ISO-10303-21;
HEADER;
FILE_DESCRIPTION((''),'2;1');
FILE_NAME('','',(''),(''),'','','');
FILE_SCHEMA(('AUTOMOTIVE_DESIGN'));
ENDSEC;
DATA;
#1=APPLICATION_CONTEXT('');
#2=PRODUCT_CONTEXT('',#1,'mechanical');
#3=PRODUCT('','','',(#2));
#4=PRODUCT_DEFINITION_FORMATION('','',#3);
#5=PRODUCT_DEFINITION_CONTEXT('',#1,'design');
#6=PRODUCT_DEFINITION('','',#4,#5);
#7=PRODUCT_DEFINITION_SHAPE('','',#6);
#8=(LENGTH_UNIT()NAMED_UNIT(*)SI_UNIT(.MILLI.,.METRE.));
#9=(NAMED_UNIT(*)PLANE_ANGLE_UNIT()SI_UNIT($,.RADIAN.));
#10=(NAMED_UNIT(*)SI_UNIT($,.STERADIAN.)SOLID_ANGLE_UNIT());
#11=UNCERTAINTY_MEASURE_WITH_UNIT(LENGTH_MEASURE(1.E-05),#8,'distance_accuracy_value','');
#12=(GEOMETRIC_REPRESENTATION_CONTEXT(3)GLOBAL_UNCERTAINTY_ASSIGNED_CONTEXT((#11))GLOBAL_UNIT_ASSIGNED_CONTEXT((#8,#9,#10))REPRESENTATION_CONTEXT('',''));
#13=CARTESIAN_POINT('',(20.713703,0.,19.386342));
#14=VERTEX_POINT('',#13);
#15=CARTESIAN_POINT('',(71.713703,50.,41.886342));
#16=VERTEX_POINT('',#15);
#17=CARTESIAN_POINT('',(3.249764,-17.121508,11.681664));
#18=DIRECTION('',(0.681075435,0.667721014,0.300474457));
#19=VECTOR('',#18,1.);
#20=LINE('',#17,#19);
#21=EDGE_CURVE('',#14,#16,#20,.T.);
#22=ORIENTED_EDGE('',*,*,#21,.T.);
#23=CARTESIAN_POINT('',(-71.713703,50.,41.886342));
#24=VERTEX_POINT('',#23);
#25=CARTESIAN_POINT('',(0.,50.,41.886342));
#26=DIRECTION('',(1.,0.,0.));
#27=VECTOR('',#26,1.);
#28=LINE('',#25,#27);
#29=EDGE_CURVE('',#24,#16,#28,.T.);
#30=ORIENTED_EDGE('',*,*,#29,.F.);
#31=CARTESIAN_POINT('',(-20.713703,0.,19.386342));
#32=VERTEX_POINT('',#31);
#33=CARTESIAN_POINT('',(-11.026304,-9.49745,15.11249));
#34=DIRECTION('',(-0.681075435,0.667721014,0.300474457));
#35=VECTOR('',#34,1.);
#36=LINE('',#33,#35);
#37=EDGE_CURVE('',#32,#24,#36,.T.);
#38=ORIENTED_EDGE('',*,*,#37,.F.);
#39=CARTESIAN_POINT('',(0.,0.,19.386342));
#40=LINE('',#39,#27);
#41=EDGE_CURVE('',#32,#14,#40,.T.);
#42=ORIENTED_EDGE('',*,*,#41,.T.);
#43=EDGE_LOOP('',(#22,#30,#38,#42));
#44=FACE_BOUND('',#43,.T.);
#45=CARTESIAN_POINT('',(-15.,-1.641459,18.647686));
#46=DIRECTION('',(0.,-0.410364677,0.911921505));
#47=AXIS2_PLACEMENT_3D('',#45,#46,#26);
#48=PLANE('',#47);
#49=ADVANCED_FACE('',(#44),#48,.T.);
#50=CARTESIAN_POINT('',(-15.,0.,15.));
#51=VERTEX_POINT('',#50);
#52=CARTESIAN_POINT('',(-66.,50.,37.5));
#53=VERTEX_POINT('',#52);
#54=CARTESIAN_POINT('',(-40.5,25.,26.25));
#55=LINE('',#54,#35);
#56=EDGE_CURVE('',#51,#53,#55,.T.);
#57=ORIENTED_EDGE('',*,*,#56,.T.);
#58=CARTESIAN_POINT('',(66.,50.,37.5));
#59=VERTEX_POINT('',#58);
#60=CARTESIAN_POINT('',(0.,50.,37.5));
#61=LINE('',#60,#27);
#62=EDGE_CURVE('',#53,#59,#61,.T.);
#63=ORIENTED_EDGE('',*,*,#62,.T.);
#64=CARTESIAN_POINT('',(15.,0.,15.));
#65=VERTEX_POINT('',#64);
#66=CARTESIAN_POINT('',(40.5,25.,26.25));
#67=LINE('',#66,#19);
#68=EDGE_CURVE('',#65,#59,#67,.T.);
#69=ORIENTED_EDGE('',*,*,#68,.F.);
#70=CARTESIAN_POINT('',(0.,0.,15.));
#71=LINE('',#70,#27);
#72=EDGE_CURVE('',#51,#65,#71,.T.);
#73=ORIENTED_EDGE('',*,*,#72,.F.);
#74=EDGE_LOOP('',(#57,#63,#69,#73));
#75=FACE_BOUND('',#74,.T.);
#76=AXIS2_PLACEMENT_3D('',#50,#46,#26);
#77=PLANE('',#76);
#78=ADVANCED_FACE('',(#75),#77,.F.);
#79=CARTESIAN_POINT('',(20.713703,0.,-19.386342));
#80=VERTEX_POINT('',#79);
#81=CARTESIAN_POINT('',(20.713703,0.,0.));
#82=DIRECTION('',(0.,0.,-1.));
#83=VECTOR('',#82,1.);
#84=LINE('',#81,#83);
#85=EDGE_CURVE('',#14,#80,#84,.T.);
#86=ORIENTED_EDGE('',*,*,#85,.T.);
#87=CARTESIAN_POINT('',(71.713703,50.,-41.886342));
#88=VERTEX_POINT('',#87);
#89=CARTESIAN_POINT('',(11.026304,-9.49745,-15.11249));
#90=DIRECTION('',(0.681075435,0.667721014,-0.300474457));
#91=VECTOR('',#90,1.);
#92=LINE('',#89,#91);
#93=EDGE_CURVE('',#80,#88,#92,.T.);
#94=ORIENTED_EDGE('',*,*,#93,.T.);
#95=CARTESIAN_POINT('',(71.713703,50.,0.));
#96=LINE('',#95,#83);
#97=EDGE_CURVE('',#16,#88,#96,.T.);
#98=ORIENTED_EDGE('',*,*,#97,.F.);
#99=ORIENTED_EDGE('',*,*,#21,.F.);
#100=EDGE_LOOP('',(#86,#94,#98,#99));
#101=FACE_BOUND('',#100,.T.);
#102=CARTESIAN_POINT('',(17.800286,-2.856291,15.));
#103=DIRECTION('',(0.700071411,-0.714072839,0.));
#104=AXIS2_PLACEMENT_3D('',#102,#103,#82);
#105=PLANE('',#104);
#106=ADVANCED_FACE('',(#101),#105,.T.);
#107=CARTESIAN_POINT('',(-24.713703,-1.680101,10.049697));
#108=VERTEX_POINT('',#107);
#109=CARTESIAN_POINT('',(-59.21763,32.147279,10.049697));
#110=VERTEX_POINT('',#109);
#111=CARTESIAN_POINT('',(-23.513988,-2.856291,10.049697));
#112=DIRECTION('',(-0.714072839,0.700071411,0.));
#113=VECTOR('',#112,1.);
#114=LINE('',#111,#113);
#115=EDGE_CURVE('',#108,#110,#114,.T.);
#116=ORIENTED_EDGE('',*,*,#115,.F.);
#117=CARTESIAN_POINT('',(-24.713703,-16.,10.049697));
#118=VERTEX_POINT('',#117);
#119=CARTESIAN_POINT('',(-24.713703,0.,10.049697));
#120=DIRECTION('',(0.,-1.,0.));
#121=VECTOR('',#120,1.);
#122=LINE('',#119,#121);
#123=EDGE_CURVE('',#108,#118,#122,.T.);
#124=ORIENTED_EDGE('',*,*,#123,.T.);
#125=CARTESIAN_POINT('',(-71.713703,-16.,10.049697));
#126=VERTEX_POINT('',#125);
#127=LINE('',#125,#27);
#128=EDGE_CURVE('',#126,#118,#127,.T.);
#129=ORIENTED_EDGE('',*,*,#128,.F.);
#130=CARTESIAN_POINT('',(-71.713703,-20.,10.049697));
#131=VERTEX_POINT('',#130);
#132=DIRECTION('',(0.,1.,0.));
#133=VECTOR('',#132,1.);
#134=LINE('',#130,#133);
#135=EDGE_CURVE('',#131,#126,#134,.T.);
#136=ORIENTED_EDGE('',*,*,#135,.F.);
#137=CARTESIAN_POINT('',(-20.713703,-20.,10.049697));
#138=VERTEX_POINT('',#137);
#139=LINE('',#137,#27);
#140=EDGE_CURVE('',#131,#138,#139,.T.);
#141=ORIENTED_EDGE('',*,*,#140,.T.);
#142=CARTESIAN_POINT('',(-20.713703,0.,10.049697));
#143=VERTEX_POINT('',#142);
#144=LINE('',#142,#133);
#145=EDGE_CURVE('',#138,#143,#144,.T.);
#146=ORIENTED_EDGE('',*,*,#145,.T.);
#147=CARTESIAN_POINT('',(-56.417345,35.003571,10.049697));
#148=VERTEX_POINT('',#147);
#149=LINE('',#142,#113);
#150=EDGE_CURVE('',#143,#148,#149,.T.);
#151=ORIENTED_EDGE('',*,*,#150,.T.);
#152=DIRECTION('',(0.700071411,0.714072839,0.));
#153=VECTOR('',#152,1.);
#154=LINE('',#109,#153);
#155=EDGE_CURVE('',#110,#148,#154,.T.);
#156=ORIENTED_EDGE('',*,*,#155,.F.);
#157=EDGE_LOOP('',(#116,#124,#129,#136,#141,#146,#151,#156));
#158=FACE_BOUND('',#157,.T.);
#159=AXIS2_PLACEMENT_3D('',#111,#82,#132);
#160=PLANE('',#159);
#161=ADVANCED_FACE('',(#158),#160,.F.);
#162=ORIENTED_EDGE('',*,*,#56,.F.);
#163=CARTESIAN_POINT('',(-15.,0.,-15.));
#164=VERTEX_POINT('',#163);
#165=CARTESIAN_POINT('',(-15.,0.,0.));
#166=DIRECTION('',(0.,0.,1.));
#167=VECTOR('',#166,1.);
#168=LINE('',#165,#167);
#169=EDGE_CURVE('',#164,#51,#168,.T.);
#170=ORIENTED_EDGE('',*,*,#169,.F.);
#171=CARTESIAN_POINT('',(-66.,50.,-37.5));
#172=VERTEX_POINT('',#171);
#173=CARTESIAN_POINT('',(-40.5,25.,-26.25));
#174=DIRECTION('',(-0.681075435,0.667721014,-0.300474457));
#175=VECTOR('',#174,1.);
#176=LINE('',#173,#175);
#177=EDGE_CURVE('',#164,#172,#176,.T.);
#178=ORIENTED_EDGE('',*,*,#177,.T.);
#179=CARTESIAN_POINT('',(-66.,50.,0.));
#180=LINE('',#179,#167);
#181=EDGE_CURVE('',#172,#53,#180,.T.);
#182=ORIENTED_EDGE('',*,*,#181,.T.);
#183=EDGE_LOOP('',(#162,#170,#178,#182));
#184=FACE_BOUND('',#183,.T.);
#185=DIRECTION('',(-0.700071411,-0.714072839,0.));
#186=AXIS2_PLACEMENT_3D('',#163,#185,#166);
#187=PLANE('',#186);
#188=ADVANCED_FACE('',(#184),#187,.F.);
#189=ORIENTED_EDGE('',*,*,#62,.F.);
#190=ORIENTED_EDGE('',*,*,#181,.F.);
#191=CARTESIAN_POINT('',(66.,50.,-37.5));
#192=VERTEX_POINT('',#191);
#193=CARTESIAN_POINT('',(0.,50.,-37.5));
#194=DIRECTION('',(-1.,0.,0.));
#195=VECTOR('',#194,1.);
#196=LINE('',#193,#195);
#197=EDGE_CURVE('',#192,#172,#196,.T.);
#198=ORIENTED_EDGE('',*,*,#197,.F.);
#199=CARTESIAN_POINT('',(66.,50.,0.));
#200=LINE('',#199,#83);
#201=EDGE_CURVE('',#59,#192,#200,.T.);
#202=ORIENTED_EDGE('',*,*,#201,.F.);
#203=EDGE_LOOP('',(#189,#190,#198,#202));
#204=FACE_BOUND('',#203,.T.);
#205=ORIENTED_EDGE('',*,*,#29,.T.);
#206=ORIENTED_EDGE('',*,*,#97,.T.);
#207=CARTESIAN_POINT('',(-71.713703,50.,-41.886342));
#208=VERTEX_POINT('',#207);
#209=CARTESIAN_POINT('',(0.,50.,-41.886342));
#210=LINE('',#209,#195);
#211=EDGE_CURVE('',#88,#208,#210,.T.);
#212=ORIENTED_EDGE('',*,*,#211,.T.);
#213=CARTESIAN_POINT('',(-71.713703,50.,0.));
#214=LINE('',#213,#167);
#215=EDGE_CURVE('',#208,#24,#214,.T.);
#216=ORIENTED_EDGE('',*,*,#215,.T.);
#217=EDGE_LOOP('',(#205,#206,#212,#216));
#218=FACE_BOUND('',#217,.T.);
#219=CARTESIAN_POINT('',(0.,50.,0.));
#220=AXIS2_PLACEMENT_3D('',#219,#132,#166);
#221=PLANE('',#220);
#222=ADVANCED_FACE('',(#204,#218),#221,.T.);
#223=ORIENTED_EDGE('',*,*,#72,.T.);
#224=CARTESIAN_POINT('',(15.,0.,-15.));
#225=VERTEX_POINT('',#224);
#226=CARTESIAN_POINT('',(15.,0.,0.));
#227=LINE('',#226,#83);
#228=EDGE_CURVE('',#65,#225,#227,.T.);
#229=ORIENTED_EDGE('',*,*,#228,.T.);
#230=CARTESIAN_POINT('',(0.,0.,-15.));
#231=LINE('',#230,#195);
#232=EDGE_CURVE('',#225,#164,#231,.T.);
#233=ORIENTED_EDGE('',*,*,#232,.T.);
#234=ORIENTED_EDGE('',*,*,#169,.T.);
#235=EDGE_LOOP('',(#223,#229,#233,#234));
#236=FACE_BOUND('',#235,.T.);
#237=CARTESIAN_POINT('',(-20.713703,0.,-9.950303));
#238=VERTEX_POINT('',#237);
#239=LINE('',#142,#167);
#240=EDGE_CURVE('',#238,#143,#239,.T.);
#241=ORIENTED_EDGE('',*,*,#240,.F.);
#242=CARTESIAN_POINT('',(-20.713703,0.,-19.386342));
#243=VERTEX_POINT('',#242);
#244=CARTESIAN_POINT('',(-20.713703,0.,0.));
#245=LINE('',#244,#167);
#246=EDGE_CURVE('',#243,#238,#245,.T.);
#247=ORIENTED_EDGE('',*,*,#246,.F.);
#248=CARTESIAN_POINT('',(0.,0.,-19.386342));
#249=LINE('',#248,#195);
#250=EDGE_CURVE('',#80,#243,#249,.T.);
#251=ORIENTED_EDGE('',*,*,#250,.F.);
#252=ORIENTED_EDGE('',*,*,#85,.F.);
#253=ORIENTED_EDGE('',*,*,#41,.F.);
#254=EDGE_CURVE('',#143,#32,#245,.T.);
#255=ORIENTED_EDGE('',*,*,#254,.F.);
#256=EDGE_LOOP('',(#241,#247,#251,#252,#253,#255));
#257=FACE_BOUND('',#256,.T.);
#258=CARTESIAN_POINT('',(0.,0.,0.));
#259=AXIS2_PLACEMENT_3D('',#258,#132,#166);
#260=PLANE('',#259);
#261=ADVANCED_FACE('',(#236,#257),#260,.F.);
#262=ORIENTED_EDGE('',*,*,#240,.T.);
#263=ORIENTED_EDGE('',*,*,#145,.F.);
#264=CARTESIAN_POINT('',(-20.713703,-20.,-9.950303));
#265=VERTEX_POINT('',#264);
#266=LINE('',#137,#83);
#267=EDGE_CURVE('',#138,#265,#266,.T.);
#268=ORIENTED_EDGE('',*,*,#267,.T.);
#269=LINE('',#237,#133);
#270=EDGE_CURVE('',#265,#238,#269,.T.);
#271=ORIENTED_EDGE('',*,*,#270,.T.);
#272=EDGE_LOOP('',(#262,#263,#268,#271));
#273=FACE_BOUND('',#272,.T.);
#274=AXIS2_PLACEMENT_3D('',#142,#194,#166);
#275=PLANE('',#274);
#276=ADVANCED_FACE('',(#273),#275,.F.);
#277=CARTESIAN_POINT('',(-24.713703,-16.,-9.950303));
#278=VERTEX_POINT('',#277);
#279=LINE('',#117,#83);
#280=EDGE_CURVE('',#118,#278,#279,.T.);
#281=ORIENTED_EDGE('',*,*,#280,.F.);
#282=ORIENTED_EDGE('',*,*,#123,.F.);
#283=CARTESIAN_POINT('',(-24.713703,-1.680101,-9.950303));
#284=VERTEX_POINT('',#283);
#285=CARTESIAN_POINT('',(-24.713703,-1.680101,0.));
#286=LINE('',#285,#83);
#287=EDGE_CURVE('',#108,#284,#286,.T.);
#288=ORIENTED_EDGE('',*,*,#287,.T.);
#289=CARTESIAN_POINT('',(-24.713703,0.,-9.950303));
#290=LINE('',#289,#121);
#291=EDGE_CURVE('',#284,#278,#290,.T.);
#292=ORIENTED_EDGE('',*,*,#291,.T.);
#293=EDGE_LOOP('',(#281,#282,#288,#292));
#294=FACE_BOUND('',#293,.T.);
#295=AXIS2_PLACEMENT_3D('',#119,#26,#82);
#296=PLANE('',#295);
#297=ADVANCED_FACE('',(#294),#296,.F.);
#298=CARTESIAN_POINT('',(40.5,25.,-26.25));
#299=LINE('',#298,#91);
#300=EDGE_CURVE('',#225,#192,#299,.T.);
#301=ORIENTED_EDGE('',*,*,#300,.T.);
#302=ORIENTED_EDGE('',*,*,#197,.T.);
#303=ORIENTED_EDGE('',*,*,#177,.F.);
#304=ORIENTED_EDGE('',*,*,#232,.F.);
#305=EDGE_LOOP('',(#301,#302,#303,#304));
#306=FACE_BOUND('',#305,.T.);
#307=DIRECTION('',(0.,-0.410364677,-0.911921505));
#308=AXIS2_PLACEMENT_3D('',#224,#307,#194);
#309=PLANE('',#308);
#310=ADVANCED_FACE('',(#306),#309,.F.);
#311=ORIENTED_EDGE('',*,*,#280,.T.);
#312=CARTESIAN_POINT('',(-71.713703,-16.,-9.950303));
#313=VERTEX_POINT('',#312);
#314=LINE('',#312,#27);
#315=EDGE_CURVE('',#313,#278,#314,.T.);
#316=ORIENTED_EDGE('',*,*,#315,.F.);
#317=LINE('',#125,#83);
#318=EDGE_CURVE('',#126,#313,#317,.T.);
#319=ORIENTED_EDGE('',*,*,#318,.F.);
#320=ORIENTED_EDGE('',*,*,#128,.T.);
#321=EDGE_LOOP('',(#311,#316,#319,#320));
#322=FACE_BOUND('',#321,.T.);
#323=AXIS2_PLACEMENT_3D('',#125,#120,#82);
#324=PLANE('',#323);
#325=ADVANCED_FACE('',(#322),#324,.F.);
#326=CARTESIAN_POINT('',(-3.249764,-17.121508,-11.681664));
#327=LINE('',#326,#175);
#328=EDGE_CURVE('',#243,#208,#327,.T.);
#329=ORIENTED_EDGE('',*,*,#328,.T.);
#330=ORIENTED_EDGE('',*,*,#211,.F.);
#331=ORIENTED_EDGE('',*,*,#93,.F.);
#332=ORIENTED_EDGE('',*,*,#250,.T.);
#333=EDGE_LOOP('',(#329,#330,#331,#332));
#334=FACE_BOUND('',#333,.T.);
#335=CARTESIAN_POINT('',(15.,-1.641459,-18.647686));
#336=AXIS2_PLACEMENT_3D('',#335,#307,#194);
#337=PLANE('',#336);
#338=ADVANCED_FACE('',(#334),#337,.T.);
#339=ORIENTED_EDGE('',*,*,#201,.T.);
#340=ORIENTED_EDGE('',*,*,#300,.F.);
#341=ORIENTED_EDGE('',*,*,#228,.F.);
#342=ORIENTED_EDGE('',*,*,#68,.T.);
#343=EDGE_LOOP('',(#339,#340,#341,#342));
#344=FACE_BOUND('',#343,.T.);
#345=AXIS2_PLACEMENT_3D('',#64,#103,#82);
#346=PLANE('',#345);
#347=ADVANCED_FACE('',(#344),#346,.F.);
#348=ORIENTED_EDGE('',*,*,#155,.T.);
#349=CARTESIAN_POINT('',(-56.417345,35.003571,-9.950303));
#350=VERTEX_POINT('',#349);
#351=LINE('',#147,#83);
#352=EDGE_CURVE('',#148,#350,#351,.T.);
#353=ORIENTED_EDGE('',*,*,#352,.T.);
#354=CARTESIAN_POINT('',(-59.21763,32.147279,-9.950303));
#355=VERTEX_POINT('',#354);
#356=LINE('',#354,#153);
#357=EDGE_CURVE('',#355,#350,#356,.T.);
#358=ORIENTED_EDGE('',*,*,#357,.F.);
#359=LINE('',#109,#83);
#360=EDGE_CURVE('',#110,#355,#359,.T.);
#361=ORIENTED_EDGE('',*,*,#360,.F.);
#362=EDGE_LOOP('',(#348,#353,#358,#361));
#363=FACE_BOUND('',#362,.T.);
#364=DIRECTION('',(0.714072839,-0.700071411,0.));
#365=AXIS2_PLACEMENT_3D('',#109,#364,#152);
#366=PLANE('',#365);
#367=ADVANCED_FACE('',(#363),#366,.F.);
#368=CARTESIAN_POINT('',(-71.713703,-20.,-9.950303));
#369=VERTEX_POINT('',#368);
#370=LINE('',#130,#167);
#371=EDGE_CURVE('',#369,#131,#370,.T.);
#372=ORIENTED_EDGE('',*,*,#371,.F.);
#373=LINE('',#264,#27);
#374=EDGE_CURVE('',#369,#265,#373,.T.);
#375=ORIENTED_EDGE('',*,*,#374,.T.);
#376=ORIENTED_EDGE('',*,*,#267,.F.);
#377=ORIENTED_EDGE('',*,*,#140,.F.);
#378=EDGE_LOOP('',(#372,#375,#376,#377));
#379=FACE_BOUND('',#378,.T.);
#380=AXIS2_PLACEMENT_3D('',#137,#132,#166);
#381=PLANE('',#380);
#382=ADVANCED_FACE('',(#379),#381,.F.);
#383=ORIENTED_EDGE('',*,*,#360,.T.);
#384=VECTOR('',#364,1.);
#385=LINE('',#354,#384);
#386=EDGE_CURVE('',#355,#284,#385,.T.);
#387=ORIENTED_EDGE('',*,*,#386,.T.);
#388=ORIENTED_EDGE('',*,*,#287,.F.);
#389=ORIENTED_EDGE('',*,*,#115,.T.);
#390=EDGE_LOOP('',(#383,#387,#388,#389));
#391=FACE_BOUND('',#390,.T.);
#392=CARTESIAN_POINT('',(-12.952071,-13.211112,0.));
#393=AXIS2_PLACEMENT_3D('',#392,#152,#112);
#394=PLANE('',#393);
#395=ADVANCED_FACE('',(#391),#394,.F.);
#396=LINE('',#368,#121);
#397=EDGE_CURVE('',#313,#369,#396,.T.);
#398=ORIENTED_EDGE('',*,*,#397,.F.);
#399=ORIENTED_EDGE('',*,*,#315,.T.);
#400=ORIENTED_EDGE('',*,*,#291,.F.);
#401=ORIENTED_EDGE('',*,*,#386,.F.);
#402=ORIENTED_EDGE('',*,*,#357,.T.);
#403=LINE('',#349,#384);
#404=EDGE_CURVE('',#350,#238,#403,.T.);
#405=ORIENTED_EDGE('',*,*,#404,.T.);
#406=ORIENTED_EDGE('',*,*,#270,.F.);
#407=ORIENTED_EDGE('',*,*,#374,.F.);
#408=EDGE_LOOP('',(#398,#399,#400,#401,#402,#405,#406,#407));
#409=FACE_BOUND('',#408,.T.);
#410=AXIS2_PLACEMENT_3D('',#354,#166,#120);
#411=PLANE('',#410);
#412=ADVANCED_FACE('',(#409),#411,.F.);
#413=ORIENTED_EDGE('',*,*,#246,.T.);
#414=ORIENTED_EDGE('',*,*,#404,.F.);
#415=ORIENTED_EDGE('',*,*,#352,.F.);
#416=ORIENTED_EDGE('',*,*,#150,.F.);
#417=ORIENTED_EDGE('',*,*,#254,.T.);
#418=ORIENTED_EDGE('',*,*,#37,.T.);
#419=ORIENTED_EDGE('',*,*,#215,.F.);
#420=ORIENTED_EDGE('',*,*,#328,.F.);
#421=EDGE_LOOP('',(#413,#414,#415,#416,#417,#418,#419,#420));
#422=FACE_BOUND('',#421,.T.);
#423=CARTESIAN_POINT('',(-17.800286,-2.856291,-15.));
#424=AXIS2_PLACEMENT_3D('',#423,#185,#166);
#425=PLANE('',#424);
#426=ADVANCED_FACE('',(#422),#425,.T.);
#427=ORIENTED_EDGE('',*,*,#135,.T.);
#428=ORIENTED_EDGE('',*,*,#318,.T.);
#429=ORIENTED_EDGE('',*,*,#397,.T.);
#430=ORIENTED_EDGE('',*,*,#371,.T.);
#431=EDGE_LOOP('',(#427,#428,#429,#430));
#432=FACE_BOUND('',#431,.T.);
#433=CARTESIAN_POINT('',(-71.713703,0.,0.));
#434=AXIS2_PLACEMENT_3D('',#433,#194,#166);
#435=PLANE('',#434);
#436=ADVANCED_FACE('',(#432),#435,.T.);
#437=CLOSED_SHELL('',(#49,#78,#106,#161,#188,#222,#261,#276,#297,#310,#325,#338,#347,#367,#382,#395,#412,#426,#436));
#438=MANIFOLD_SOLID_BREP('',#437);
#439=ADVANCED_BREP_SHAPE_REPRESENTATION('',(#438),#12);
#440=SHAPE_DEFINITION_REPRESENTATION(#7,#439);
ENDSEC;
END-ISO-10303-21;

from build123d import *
from build123d.topology import SkipClean

# Parameters (mm, degrees)
SHELL1_T                 = 4
SKETCH4_W                = 50
SKETCH4_H                = 20
BOSS_EXTRUDE1_DEPTH      = 4
BOSS_EXTRUDE2_DEPTH      = 10.049697
BOSS_EXTRUDE2_DEPTH_BACK = 9.950303
SKETCH7_W                = 4
SKETCH7_H                = 20
SKETCH8_W                = 20
SKETCH8_H                = 4
BOSS_EXTRUDE3_DEPTH      = 47


with BuildPart() as part:
    # Boundary1: read off the stored shape, not the designer's step
    # Boundary1: loft between two sections, ruled curve by curve
    boundary1_from = [
        Edge.make_line((-15, 0, 15), (15, 0, 15)),
        Edge.make_line((15, 0, 15), (15, 0, -15)),
        Edge.make_line((15, 0, -15), (-15, 0, -15)),
        Edge.make_line((-15, 0, -15), (-15, 0, 15)),
    ]
    boundary1_to = [
        Edge.make_line((-66, 50, 37.5), (66, 50, 37.5)),
        Edge.make_line((66, 50, 37.5), (66, 50, -37.5)),
        Edge.make_line((66, 50, -37.5), (-66, 50, -37.5)),
        Edge.make_line((-66, 50, -37.5), (-66, 50, 37.5)),
    ]
    boundary1 = Solid(Shell([*[Face.make_surface_from_curves(boundary1_from[k], boundary1_to[k]) for k in range(4)], Face(Wire(boundary1_from)), Face(Wire(boundary1_to))]))
    add(boundary1)

    # Shell1
    shell1_openings = [part.faces().sort_by_distance(p)[0] for p in [
        (0, 0, 0),
        (0, 50, 0),
    ]]
    offset(amount=SHELL1_T, openings=shell1_openings, kind=Kind.INTERSECTION)

    # Sketch4 → Boss-Extrude1 (add)
    with BuildSketch(Plane(origin=(-10.15178535, -10.354821057, 0), x_dir=(0.7140728391445788, -0.7000714109260574, 0), z_dir=(-0.7000714109260574, -0.7140728391445788, 0))):
        with Locations((-39.791092587, 0.049697146)):
            Rectangle(SKETCH4_W, SKETCH4_H)
    extrude(amount=BOSS_EXTRUDE1_DEPTH)

    # Sketch7 → Boss-Extrude2 (add, two sides: drawn at the far end of the back side and taken through both)
    with SkipClean():  # the faces are left unmerged after this step: merging them gives an invalid solid
        with BuildSketch(Plane.XY.offset(-BOSS_EXTRUDE2_DEPTH_BACK)):
            with Locations((-22.713702827, -10)):
                Rectangle(SKETCH7_W, SKETCH7_H)
        extrude(amount=BOSS_EXTRUDE2_DEPTH + BOSS_EXTRUDE2_DEPTH_BACK)

    # Sketch8 → Boss-Extrude3 (add)
    with SkipClean():  # the faces are left unmerged after this step: merging them gives an invalid solid
        with BuildSketch(Plane.ZY.offset(24.713702827)):
            with Locations((0.049697146, -18)):
                Rectangle(SKETCH8_W, SKETCH8_H)
        extrude(amount=BOSS_EXTRUDE3_DEPTH)


solid = part.part
